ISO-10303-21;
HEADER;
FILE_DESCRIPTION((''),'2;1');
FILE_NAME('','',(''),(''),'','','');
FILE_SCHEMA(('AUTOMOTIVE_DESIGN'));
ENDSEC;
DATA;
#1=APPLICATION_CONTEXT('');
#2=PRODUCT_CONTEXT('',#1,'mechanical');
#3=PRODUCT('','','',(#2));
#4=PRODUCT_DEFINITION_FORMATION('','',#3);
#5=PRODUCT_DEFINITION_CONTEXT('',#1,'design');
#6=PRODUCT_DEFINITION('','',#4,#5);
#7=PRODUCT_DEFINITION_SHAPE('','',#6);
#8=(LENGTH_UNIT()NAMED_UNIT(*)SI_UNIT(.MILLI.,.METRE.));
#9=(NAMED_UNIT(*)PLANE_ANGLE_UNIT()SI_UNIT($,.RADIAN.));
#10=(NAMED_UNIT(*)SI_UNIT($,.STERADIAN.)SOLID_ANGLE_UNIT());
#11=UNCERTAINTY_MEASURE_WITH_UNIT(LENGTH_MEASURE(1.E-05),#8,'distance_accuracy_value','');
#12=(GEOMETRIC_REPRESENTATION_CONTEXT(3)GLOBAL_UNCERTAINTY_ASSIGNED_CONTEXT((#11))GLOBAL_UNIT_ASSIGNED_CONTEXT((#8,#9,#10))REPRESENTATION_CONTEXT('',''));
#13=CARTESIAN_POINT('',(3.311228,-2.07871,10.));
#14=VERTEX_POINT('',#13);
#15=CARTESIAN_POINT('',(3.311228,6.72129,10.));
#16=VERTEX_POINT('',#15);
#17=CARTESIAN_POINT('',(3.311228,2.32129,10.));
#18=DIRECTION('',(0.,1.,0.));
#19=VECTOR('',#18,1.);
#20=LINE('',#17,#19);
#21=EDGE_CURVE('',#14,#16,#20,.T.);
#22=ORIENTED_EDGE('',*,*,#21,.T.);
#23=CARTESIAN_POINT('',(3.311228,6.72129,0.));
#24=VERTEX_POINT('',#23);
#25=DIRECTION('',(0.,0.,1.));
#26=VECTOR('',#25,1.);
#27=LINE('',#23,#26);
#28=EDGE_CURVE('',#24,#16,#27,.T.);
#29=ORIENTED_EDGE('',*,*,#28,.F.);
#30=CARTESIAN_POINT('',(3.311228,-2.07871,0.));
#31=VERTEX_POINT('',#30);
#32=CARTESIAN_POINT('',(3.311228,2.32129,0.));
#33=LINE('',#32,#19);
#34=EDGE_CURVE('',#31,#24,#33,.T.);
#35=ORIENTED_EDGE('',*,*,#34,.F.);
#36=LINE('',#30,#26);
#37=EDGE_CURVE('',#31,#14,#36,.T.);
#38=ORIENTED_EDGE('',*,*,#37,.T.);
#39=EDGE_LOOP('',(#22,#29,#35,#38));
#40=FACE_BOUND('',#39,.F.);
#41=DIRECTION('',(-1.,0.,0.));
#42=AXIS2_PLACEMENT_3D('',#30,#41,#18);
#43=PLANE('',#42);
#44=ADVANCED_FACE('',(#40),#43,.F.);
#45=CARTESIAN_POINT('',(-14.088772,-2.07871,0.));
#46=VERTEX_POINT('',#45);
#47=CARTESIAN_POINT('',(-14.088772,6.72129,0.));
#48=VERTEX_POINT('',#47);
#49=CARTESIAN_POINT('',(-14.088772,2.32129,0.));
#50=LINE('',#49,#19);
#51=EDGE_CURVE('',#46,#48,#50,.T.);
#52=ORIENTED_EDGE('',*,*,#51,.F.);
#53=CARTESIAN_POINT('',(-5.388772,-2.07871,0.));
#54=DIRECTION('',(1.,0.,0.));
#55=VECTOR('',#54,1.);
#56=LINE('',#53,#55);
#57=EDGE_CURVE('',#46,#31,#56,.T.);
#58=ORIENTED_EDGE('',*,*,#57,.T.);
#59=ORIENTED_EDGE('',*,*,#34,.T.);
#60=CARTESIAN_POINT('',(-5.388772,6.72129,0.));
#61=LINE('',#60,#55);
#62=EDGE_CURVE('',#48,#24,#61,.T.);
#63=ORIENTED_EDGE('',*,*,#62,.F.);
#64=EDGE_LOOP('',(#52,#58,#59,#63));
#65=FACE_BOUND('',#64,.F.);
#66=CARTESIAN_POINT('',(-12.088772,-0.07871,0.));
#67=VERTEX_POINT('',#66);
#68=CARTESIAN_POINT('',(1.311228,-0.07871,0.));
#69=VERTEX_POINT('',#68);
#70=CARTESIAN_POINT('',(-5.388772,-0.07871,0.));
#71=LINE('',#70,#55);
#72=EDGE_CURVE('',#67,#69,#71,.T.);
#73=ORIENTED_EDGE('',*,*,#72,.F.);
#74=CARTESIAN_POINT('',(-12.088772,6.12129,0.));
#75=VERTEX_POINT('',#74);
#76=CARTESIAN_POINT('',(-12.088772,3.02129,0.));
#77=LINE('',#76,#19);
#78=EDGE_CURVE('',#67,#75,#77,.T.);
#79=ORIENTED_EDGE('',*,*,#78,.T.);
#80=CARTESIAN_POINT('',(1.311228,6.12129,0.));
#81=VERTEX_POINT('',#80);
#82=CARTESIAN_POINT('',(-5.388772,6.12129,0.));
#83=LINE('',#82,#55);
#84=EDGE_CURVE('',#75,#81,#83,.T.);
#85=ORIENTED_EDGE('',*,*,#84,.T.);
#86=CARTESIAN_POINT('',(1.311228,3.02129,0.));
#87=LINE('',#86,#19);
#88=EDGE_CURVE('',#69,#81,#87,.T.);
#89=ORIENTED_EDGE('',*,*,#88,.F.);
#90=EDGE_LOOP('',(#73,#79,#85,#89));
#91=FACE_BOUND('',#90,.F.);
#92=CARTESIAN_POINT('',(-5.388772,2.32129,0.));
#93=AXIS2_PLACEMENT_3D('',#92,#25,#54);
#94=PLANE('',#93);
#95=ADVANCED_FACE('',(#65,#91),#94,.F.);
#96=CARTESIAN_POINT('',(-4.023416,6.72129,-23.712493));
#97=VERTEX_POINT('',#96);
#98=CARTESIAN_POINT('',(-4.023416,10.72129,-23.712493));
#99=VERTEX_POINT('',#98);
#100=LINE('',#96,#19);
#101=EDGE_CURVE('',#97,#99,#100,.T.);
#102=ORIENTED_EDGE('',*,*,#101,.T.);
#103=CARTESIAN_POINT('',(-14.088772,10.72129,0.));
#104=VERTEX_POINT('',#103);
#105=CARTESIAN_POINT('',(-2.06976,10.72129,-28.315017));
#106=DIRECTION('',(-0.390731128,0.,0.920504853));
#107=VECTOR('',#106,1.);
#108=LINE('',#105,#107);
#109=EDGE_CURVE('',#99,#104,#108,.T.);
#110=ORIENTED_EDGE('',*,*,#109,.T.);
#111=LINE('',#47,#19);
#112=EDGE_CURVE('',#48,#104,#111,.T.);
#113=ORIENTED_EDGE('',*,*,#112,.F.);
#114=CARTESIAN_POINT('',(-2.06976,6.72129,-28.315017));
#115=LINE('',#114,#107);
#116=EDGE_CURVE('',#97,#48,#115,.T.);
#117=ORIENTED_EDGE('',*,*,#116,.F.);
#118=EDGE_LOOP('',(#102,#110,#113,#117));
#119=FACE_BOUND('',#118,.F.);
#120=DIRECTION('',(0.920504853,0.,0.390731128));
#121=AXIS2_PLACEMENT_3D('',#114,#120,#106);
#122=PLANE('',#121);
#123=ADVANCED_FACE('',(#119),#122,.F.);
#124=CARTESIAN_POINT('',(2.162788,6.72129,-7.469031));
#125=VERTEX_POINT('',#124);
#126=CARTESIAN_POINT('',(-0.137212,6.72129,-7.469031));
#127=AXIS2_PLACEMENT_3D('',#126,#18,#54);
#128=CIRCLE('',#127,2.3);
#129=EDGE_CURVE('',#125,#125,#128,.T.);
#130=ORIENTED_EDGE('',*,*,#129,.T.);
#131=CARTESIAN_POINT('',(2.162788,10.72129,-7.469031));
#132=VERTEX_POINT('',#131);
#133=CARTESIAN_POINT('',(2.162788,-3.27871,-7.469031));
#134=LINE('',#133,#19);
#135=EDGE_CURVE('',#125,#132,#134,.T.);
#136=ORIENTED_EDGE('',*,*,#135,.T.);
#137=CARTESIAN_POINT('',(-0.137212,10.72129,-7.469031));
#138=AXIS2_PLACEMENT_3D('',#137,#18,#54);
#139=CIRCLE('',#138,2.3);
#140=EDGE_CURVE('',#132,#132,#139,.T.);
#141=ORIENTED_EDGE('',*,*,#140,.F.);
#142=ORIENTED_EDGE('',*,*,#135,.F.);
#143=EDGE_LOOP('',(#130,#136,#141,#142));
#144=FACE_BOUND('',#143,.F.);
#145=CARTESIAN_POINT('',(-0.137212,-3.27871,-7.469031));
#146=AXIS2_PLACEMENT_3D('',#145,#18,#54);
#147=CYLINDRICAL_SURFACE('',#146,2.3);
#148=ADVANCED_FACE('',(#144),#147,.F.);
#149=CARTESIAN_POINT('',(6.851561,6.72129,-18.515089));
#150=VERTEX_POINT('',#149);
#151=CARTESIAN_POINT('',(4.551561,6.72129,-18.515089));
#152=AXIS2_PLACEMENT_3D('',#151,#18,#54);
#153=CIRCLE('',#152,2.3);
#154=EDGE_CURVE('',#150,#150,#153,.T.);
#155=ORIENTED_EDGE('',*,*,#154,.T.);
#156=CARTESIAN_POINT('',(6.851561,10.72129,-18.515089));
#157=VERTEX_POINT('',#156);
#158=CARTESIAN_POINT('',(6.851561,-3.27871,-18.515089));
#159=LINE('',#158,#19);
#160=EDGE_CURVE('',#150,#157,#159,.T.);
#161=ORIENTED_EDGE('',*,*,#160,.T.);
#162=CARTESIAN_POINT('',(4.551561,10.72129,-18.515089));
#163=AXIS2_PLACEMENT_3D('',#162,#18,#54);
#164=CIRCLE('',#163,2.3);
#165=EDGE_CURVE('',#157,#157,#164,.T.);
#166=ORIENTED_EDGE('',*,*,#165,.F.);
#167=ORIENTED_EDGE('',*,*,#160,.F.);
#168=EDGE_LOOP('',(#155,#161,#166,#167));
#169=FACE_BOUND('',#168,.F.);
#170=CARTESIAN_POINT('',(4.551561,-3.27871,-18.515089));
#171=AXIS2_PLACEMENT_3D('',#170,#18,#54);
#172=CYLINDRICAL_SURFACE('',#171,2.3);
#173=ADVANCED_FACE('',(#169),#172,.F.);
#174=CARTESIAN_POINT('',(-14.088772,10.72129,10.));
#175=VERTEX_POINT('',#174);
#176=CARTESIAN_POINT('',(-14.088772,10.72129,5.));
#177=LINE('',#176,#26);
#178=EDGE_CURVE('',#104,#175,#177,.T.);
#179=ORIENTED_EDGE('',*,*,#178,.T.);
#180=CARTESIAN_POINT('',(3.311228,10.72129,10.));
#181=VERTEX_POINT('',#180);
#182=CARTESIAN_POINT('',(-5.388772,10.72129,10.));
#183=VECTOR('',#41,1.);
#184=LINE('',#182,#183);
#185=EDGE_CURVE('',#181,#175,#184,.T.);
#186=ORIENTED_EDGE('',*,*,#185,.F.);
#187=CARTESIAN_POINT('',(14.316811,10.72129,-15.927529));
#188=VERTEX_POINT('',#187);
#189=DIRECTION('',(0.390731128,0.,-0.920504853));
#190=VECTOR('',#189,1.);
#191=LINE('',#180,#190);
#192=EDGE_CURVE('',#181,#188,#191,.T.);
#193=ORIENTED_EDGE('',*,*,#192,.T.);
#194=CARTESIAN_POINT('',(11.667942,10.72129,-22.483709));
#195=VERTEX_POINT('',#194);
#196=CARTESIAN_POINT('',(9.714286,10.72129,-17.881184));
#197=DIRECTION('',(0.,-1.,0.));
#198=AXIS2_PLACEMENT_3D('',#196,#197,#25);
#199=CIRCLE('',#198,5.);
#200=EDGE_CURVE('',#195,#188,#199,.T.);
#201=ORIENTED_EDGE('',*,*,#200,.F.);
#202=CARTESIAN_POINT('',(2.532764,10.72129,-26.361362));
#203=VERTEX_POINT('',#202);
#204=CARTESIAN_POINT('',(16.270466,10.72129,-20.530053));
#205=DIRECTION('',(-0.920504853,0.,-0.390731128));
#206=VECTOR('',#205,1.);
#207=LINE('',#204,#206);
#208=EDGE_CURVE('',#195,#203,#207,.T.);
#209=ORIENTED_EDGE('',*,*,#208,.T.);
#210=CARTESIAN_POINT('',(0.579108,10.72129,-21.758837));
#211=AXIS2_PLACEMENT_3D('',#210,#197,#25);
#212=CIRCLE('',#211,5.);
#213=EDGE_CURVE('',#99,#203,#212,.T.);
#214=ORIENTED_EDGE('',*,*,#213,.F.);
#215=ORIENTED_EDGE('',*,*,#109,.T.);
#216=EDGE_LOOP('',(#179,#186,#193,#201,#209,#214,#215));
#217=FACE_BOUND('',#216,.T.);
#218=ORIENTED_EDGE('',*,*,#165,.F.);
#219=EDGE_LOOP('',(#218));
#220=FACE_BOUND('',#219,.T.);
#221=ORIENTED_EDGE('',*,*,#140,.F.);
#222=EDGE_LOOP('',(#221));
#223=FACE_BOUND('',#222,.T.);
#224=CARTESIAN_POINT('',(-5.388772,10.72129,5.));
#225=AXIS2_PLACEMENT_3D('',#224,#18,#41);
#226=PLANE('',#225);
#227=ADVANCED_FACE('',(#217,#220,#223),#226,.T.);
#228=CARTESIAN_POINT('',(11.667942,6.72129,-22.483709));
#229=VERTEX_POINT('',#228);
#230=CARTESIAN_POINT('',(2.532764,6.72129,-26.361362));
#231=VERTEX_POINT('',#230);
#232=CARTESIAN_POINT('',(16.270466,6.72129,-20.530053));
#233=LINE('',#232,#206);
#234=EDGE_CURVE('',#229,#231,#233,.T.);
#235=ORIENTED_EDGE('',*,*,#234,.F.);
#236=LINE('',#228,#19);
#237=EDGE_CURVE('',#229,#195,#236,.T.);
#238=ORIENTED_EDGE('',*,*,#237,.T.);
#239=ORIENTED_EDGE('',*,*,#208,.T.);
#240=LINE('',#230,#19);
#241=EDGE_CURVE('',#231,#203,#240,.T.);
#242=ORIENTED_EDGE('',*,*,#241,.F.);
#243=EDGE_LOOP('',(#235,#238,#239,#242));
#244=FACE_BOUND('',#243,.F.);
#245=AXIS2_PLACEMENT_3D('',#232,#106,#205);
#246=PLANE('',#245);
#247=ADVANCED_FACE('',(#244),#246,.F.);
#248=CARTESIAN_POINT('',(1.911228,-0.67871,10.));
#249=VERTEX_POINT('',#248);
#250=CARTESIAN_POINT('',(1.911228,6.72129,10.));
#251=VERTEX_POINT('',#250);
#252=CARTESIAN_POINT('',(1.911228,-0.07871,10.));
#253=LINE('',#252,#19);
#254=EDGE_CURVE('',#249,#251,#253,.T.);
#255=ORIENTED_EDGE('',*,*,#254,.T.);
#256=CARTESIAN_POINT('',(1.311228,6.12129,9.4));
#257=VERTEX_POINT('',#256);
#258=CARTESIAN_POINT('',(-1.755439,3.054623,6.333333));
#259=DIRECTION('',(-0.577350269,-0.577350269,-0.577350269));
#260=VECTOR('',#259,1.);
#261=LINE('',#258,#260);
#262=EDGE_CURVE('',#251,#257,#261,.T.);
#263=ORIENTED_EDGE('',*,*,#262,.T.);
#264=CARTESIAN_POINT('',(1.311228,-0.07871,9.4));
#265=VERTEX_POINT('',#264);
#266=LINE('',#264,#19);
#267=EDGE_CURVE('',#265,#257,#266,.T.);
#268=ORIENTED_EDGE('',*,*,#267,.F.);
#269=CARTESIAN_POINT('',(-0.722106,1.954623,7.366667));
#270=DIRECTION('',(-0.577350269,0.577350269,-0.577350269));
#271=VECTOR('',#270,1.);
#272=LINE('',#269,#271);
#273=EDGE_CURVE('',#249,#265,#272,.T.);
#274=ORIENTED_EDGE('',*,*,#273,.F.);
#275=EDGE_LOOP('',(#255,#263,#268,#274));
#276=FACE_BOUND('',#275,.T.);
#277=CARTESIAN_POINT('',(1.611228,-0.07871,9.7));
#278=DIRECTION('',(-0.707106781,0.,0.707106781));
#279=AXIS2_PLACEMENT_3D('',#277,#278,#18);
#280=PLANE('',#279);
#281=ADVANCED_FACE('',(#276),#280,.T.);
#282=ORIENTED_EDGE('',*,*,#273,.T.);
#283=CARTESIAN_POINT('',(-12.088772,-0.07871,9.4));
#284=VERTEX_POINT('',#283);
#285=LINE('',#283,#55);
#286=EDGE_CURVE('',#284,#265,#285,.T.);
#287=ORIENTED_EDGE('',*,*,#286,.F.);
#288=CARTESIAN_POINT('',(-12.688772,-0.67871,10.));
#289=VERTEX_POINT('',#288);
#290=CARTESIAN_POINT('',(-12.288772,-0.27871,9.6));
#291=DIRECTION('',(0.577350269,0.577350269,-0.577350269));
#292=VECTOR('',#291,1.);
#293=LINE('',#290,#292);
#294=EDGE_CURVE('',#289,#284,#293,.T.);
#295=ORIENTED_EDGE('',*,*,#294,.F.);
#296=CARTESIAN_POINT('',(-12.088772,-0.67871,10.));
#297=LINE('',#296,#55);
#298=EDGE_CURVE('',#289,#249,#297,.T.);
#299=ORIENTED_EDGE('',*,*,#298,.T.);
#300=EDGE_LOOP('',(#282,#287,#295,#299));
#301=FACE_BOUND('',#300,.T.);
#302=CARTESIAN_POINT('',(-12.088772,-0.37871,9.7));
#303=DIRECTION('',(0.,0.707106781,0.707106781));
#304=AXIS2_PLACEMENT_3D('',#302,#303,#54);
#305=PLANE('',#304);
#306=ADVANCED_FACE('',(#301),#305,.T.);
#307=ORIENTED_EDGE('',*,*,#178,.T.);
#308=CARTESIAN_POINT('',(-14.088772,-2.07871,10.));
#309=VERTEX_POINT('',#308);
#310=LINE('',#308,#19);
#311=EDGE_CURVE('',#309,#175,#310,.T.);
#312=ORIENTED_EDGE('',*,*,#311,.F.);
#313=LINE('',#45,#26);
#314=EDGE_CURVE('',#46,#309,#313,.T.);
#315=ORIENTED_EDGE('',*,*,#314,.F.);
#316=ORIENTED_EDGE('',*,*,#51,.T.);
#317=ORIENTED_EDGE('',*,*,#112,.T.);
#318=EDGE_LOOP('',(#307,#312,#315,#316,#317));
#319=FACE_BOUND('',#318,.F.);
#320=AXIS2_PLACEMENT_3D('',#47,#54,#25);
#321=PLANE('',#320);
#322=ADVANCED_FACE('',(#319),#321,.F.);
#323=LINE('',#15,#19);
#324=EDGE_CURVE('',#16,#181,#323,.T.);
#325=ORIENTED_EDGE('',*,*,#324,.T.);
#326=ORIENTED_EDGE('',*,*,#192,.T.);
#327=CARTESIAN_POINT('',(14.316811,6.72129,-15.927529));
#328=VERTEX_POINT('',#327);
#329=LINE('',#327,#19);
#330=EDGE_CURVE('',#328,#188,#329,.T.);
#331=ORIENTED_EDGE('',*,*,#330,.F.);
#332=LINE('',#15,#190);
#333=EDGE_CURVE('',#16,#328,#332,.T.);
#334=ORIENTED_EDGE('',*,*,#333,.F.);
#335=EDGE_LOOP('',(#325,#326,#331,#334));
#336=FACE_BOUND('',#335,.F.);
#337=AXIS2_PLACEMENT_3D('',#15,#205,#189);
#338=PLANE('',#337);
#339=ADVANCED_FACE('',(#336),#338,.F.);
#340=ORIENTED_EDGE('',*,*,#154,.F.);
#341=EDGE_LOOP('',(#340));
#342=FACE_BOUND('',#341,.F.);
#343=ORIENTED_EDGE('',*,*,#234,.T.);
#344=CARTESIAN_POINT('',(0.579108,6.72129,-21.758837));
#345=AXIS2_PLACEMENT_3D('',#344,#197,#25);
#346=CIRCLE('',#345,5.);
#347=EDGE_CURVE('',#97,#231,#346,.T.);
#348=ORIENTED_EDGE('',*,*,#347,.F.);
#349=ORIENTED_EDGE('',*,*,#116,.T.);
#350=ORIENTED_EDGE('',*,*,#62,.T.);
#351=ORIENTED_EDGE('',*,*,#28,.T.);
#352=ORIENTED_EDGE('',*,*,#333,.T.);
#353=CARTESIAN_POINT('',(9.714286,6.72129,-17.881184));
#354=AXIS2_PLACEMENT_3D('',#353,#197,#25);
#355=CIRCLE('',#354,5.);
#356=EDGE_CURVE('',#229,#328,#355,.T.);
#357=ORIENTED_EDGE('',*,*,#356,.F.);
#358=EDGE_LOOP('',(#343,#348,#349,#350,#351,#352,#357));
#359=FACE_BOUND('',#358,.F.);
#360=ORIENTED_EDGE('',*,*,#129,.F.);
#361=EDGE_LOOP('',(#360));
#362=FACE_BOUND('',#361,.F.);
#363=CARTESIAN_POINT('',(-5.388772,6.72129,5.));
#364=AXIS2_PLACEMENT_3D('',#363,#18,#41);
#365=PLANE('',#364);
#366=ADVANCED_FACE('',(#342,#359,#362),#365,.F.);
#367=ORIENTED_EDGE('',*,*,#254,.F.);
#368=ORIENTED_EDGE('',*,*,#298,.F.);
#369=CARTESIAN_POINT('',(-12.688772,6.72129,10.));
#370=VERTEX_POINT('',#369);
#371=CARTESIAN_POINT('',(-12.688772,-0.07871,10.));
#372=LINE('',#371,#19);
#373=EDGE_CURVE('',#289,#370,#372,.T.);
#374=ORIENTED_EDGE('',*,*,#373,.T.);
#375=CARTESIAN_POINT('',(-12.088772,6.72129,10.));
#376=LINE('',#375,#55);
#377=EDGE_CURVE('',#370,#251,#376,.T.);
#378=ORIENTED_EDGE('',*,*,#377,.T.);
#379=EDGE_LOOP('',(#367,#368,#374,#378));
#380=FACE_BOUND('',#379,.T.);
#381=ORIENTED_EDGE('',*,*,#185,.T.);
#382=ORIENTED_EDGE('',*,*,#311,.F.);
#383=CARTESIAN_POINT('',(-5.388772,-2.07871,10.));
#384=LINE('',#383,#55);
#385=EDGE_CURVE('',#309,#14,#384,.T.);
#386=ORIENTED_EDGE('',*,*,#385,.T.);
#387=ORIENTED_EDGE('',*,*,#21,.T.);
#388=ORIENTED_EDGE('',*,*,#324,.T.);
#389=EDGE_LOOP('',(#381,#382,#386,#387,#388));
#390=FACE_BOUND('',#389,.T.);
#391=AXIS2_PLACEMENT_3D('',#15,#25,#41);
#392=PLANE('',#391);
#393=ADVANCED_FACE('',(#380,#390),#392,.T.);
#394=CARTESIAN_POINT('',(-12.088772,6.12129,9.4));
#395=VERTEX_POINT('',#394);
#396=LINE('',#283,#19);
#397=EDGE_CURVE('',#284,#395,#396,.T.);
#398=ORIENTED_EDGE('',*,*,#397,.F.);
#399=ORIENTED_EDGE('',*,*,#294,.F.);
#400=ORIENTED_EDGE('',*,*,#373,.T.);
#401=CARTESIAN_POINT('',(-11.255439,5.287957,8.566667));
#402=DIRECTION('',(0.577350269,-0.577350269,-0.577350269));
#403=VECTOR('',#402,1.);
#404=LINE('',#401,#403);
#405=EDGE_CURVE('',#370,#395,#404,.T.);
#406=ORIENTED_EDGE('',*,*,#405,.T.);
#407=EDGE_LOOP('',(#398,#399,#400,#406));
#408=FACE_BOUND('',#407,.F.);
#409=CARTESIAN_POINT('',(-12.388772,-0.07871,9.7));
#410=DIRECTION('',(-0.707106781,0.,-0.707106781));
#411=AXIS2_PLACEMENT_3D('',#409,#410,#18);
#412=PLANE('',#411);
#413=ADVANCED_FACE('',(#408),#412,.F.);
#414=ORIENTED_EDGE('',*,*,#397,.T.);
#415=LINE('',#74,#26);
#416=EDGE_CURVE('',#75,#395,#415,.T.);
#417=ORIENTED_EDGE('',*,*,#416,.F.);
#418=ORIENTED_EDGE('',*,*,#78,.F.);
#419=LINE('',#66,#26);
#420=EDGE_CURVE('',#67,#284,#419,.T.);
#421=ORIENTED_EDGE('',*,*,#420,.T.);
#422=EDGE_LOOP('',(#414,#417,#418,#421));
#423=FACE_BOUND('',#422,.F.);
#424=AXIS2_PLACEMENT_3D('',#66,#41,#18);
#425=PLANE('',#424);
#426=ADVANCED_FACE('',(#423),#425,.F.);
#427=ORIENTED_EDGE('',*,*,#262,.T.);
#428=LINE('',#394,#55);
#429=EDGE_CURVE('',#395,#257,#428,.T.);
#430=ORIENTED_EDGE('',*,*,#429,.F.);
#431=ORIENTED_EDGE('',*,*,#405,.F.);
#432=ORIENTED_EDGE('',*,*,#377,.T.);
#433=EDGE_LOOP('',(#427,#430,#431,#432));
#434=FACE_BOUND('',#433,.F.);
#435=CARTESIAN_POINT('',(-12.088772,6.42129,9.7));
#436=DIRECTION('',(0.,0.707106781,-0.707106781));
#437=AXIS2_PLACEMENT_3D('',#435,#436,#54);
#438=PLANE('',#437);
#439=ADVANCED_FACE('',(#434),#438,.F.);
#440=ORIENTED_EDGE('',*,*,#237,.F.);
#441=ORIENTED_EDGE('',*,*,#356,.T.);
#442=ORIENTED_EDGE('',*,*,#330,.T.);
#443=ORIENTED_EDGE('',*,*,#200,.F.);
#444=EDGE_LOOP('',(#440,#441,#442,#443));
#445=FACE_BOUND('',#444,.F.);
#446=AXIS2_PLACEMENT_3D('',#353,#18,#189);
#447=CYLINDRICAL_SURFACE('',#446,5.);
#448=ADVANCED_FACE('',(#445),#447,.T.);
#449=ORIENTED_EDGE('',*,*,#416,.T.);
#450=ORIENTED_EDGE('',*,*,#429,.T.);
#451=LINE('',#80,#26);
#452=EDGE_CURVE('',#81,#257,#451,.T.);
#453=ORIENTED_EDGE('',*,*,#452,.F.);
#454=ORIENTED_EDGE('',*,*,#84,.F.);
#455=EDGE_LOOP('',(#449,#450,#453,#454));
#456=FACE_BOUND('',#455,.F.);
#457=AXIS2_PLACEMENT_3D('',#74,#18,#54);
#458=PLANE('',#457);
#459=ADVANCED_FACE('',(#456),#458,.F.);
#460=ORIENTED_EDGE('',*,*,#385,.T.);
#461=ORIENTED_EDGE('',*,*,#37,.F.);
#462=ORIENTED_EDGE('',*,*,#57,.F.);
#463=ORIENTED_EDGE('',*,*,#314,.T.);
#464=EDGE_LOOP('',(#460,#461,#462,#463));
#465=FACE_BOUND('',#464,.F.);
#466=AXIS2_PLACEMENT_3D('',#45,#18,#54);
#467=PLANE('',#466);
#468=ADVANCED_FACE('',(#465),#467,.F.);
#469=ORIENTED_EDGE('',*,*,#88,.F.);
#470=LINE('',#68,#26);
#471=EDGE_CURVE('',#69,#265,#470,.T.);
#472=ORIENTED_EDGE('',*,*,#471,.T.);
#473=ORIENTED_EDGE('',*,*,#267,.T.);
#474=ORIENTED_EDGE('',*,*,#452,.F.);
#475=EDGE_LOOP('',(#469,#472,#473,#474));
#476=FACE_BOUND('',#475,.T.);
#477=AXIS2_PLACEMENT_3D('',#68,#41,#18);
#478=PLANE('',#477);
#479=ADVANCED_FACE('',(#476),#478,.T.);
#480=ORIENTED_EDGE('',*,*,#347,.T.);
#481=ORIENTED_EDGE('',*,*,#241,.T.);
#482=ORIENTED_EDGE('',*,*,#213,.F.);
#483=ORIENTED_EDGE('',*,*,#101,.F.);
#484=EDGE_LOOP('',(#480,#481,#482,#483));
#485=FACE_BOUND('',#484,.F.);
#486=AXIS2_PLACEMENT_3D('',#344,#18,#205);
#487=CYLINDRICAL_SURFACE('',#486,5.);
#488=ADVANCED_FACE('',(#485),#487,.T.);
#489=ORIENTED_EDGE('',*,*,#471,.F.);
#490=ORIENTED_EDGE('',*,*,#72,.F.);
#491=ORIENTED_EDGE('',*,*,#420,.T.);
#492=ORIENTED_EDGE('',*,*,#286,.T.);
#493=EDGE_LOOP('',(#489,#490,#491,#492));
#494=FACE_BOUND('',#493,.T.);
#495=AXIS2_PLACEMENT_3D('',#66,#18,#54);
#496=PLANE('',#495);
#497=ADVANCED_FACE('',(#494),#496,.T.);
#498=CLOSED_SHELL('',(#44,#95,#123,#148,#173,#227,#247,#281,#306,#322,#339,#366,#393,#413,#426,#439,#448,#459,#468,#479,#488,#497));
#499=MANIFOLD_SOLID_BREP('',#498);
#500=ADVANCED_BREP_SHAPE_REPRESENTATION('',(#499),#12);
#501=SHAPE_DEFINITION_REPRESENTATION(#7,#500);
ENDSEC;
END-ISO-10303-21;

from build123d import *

# Parameters (mm, degrees)
F0_W     = 17.4
F0_H     = 8.8
F0_W_2   = 13.4
F0_H_2   = 6.2
F1_DEPTH = 10
F2_W     = 17.4
F2_H     = 10
F3_DEPTH = 4
F4_D     = 4.6
F4_DEPTH = 10
F4_TIP   = 1.3819794238
F5_R     = 5
F6_SIZE  = 0.6


# Not quite as in the source:
# - a feature names something its author has since deleted; it is built from what else it names


with BuildPart() as f1:
    # F0 (on Top) → F1 (new body)
    with BuildSketch(Plane.XY):
        with Locations((-5.3887722373, 2.3212898893)):
            Rectangle(F0_W, F0_H)
        with Locations((-5.3887722373, 3.0212898893)):
            Rectangle(F0_W_2, F0_H_2, mode=Mode.SUBTRACT)
    extrude(amount=F1_DEPTH)

    # F2 (on face) → F3 (join)
    with BuildSketch(Plane(origin=(0, 6.7212898893, 0), x_dir=(-1, 0, 0), z_dir=(0, 1, 0))):
        with Locations((5.3887722373, 5)):
            Rectangle(F2_W, F2_H)
        Polygon((-3.3112277627, 0), (-3.3112277627, 10), (-16.2704663397, -20.530052861), (2.069760485, -28.3150172716), (14.0887722373, 0), align=None)
    extrude(amount=F3_DEPTH)

    # F4
    with Locations(Plane(origin=(0, 6.7212898893, 0), x_dir=(-1, 0, 0), z_dir=(0, -1, 0))):
        with Locations((0.1372122432, 7.4690311061), (-4.5515612986, 18.5150893475)):
            Hole(F4_D / 2, depth=F4_DEPTH)
            with Locations((0, 0, -(F4_DEPTH + F4_TIP / 2))):  # 118° drill point
                Cone(0, F4_D / 2, F4_TIP, mode=Mode.SUBTRACT)

    # F5
    f5_edges = [f1.edges().sort_by_distance(p)[0] for p in [
        (16.270466, 8.72129, -20.530053),
        (-2.06976, 8.72129, -28.315017),
    ]]
    fillet(f5_edges, radius=F5_R)

    # F6
    f6_edges = [f1.edges().sort_by_distance(p)[0] for p in [
        (-5.388772, 6.12129, 10),
        (1.311228, 3.02129, 10),
        (-12.088772, 3.02129, 10),
        (-5.388772, -0.07871, 10),
    ]]
    chamfer(f6_edges, length=F6_SIZE)


solid = f1.part
